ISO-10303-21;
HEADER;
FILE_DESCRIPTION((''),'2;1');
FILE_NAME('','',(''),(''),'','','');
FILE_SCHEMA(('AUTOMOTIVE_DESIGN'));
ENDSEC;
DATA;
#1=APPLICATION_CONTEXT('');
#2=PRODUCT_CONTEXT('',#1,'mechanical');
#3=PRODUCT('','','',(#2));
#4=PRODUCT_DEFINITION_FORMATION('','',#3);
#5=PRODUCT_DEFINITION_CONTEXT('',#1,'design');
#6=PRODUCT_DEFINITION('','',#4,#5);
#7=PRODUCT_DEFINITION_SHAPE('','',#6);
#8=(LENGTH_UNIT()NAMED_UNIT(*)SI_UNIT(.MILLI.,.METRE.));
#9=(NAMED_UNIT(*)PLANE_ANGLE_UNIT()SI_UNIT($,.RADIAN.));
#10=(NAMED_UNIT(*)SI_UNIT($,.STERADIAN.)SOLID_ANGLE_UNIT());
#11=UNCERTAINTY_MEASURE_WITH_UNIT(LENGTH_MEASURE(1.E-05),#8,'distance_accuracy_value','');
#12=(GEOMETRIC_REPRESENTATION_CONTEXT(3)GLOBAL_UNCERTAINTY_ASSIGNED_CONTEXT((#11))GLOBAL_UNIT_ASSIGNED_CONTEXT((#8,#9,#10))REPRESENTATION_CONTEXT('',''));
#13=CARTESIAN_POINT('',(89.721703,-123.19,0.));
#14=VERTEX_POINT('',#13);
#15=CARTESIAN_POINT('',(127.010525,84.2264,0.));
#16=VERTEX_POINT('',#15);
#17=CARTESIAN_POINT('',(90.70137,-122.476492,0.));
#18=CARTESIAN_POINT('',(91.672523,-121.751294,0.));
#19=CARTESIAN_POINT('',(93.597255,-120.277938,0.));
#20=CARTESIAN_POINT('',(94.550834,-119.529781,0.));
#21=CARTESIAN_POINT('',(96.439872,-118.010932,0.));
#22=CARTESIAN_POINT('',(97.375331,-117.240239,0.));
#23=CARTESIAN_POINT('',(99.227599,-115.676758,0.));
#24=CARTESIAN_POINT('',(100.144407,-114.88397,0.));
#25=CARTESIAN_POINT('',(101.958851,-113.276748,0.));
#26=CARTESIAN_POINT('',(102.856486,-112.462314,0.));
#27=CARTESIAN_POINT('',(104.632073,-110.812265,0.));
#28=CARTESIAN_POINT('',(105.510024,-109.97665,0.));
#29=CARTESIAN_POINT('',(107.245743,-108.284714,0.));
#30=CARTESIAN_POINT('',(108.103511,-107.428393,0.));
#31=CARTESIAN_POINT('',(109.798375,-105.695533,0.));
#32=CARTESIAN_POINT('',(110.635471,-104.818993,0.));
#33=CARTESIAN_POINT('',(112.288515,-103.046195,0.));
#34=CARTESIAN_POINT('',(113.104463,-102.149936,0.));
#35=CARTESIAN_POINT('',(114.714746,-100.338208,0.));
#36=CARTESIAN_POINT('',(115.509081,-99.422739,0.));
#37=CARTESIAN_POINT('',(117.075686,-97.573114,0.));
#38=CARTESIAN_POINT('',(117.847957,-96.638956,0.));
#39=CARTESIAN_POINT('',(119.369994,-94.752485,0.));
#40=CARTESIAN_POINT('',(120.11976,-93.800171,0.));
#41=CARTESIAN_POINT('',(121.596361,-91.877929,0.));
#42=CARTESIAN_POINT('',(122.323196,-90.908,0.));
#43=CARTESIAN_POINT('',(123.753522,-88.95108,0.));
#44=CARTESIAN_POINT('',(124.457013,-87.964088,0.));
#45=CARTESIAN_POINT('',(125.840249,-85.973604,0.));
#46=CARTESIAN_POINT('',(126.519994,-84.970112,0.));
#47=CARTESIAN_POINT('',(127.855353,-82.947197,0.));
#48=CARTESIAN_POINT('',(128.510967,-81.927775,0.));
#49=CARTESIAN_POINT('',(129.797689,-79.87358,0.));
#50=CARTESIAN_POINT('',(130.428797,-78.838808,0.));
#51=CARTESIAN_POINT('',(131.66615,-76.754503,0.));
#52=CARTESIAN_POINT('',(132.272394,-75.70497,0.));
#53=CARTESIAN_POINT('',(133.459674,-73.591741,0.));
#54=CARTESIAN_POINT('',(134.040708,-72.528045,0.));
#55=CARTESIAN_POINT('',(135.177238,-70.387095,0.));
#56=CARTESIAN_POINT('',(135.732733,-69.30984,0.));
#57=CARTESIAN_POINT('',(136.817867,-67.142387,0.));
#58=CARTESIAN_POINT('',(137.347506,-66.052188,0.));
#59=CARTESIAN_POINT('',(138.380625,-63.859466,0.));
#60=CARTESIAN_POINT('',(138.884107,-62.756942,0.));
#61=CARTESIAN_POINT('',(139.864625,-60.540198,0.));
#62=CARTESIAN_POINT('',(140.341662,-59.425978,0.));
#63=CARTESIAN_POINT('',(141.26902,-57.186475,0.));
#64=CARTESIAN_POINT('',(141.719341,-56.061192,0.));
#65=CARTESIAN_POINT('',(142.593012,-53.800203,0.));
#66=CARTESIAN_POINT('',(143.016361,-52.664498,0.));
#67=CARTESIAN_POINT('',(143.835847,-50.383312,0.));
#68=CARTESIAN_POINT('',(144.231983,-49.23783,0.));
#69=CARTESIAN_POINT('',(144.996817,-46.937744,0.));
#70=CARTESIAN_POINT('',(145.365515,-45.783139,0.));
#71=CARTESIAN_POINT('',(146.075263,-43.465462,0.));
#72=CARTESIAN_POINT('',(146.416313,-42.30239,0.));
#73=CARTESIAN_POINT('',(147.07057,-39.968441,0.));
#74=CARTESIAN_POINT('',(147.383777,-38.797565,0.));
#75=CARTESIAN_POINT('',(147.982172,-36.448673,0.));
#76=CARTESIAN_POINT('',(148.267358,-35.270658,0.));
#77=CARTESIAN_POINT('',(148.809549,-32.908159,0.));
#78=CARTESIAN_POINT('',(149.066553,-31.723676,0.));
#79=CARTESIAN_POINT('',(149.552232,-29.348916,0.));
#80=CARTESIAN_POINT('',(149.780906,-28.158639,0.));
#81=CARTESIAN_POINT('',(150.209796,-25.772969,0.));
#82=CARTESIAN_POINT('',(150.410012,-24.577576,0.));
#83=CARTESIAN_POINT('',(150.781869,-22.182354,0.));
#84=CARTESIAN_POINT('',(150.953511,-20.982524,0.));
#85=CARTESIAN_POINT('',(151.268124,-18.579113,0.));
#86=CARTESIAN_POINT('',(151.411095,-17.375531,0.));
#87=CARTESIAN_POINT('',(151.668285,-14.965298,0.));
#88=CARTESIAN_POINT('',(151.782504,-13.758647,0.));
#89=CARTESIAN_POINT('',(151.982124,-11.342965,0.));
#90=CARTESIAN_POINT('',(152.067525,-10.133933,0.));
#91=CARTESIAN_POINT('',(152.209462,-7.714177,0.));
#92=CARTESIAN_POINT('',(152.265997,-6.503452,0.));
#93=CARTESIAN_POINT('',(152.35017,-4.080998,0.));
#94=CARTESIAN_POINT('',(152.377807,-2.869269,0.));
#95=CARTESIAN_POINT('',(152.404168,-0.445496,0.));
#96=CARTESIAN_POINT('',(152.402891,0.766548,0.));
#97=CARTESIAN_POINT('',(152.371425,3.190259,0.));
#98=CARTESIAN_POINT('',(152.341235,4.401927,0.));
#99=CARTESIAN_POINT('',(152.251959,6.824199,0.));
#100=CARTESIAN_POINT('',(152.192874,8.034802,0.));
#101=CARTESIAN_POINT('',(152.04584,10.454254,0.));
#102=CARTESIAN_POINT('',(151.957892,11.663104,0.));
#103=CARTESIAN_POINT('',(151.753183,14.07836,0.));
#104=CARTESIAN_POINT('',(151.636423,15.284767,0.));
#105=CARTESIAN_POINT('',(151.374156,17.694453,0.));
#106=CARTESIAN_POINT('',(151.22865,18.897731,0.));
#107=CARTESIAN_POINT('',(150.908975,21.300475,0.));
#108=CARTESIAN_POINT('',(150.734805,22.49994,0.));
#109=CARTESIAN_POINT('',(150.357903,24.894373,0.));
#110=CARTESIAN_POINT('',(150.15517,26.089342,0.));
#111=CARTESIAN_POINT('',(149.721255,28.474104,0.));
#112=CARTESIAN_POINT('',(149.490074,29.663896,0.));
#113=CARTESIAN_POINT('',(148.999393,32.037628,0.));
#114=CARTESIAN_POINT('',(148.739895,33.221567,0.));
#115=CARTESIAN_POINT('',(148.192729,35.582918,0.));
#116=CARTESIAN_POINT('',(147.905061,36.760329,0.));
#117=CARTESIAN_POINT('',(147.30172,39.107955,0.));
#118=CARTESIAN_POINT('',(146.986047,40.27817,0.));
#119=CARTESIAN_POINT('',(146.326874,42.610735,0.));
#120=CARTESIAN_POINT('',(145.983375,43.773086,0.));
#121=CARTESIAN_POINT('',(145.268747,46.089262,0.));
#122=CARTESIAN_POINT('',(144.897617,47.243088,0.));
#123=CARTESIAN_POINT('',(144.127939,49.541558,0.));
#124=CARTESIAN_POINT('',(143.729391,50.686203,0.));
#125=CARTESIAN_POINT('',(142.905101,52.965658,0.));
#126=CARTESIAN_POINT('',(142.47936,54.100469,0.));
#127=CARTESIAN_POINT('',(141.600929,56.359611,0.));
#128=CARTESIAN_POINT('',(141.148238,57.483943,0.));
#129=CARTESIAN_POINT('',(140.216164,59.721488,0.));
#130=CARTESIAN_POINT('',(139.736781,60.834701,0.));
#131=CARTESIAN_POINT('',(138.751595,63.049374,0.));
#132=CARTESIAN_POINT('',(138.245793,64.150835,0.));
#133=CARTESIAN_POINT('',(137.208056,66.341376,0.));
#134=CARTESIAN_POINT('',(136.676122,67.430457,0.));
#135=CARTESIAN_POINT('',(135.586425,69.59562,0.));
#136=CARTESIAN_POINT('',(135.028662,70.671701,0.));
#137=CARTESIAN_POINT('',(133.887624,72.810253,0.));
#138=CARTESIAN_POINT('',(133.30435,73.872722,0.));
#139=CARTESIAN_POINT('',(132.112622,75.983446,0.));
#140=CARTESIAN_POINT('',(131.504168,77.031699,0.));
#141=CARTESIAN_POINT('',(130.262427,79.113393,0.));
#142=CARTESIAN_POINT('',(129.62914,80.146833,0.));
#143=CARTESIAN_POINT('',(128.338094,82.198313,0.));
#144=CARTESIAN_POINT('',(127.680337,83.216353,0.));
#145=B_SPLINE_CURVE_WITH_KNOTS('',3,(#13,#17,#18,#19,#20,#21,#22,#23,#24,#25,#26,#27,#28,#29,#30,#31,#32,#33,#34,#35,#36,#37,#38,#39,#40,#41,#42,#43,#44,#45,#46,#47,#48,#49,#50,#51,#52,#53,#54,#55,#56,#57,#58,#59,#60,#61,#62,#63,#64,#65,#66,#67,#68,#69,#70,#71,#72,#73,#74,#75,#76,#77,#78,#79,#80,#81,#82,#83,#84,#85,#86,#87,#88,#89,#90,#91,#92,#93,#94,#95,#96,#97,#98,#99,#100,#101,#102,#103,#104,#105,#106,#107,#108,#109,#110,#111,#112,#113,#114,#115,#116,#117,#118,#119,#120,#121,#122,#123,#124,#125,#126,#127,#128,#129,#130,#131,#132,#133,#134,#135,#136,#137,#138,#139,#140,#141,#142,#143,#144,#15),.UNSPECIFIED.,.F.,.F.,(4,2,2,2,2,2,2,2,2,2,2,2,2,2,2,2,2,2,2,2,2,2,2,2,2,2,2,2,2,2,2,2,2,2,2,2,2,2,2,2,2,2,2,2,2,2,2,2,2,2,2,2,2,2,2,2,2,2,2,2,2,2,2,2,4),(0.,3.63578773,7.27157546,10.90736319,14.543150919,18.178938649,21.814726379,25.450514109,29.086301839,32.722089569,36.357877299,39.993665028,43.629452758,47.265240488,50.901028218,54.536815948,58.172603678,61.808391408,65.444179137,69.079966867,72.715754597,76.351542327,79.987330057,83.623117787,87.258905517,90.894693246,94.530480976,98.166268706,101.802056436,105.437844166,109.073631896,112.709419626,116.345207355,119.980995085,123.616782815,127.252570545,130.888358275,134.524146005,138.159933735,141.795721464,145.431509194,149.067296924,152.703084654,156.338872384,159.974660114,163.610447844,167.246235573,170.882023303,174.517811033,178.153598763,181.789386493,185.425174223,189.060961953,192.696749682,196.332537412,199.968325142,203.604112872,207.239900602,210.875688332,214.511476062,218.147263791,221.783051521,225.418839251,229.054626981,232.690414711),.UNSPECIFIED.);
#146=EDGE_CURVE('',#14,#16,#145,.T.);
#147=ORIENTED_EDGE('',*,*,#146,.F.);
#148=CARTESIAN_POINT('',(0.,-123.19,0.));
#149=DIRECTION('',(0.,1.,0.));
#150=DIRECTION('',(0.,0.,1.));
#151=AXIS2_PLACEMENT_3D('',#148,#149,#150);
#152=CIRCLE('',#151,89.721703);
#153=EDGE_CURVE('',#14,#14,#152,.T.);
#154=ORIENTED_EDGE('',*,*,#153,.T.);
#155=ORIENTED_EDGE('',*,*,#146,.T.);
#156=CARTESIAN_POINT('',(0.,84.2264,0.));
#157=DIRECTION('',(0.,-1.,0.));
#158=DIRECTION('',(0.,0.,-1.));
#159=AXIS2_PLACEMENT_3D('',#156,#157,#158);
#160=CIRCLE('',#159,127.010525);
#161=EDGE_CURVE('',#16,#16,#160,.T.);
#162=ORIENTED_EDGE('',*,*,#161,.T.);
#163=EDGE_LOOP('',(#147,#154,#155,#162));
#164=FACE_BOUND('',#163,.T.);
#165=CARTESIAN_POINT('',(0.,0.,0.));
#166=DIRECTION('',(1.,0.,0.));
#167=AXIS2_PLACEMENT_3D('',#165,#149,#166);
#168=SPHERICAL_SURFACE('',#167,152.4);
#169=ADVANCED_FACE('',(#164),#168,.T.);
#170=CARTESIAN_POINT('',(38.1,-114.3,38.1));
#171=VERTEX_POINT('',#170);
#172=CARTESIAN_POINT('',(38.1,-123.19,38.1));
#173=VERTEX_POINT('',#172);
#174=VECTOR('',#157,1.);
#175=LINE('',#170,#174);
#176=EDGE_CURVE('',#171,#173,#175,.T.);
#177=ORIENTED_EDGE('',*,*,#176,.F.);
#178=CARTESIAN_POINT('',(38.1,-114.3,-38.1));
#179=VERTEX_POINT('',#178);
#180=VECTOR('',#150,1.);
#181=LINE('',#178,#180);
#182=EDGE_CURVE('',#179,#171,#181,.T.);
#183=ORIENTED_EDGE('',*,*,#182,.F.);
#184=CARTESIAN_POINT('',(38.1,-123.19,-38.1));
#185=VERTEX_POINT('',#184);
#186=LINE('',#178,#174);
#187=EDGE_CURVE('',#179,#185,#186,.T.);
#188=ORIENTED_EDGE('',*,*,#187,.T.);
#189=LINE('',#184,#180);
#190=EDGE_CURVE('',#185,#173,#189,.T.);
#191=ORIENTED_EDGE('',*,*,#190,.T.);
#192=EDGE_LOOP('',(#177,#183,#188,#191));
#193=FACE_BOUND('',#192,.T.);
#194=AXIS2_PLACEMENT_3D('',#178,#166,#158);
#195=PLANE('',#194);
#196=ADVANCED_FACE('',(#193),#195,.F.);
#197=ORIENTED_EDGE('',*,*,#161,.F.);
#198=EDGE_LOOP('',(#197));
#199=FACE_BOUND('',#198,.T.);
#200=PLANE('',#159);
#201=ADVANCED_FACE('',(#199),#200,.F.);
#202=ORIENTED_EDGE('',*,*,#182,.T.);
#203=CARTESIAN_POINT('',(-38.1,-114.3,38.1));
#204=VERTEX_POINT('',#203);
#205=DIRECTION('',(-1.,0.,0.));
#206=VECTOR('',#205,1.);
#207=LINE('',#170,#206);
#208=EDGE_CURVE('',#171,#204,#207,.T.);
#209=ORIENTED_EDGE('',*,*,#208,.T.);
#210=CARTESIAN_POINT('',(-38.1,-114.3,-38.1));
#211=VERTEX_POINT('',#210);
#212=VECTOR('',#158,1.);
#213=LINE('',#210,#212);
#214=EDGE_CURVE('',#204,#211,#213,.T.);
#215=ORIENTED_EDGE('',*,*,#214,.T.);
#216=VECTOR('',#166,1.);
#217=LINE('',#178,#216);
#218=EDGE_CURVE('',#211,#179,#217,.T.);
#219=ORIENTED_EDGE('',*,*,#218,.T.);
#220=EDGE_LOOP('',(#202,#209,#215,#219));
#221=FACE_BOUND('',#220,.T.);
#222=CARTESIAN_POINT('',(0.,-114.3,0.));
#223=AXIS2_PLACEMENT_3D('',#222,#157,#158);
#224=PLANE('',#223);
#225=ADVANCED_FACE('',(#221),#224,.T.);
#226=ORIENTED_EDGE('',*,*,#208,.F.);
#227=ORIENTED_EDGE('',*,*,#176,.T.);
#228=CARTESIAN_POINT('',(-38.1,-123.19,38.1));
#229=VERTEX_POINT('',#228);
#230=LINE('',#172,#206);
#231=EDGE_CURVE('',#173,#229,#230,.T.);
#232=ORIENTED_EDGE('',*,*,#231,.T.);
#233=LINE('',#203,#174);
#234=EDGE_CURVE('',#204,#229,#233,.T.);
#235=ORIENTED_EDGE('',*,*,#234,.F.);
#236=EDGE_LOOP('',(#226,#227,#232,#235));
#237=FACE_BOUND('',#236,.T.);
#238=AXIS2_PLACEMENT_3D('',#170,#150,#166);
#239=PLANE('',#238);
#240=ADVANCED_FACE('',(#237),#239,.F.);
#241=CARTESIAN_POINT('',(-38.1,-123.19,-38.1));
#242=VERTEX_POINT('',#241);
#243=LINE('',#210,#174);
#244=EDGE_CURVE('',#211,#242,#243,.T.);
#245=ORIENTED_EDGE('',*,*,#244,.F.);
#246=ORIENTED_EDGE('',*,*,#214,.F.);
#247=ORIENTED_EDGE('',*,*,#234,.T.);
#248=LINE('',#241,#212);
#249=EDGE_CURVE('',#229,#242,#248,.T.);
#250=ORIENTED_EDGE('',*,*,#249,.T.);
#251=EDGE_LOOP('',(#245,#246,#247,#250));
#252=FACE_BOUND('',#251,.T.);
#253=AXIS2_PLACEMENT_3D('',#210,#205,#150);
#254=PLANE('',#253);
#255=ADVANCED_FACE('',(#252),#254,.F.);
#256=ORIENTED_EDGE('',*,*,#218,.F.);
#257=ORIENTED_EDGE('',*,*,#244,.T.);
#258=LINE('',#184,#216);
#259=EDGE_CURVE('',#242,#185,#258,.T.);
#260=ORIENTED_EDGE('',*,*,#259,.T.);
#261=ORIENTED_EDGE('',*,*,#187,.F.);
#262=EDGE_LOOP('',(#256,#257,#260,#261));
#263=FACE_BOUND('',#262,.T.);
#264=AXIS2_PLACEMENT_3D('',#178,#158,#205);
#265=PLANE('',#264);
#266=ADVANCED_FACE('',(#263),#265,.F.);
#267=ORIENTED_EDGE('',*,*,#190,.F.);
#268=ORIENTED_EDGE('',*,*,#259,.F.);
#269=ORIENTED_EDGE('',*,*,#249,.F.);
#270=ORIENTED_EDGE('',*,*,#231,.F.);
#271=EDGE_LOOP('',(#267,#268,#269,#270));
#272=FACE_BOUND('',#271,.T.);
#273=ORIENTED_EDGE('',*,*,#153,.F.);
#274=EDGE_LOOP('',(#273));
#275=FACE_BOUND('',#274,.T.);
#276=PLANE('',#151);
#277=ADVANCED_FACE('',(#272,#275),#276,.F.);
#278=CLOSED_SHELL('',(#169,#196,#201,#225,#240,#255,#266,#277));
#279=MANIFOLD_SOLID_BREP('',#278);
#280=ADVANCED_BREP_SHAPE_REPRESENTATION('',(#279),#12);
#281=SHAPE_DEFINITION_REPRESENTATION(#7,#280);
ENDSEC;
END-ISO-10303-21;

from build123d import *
from OCP.BRepAlgoAPI import BRepAlgoAPI_Cut
from OCP.TopTools import TopTools_ListOfShape

# Parameters (mm, degrees)
SKETCH2_W          = 408.49124402
SKETCH2_H          = 323.52250017
CUT_EXTRUDE1_DEPTH = 68.1736
SKETCH3_W          = 76.2
SKETCH3_H          = 76.2
CUT_EXTRUDE2_DEPTH = 38.1
SKETCH5_W          = 393.276963666
SKETCH5_H          = 361.967680156
CUT_EXTRUDE4_DEPTH = 29.21


with BuildPart() as part:
    # Sketch1 → Revolve1 (revolve)
    with BuildSketch(Plane.XY):
        with BuildLine():
            Line((0, 152.4), (0, -152.4))
            ThreePointArc((0, -152.4), (152.4, 0), (0, 152.4))
        make_face()
    revolve(axis=Axis((0, 152.4, 0), (0, -1, 0)))

    # Sketch2 → Cut-Extrude1 (cut)
    with BuildSketch(Plane(origin=(0, 152.4, 0), x_dir=(1, 0, 0), z_dir=(0, 1, 0))):
        Rectangle(SKETCH2_W, SKETCH2_H)
    extrude(amount=-CUT_EXTRUDE1_DEPTH, mode=Mode.SUBTRACT)


with BuildPart() as cut_extrude2_tool:
    # Sketch3 → Cut-Extrude2 (new body)
    with BuildSketch(Plane(origin=(0, -152.4, 0), x_dir=(-1, 0, 0), z_dir=(0, -1, 0))):
        Rectangle(SKETCH3_W, SKETCH3_H)
    extrude(amount=-CUT_EXTRUDE2_DEPTH)


with BuildPart() as part_1:
    add(part.part)

    # Cut-Extrude2: cut by cut_extrude2_tool, with a tolerance
    cut_extrude2_stock = TopTools_ListOfShape()
    cut_extrude2_stock.Append(part_1.part.wrapped)
    cut_extrude2_tools = TopTools_ListOfShape()
    cut_extrude2_tools.Append(cut_extrude2_tool.part.wrapped)
    cut_extrude2_cut = BRepAlgoAPI_Cut()
    cut_extrude2_cut.SetArguments(cut_extrude2_stock)
    cut_extrude2_cut.SetTools(cut_extrude2_tools)
    cut_extrude2_cut.SetFuzzyValue(0.00001)
    cut_extrude2_cut.Build()
    add(Compound.cast(cut_extrude2_cut.Shape()).solids(), mode=Mode.REPLACE)

    # Sketch5 → Cut-Extrude4 (cut)
    with BuildSketch(Plane(origin=(0, -152.4, 0), x_dir=(-1, 0, 0), z_dir=(0, -1, 0))):
        Rectangle(SKETCH5_W, SKETCH5_H)
    extrude(amount=-CUT_EXTRUDE4_DEPTH, mode=Mode.SUBTRACT)


solid = part_1.part
